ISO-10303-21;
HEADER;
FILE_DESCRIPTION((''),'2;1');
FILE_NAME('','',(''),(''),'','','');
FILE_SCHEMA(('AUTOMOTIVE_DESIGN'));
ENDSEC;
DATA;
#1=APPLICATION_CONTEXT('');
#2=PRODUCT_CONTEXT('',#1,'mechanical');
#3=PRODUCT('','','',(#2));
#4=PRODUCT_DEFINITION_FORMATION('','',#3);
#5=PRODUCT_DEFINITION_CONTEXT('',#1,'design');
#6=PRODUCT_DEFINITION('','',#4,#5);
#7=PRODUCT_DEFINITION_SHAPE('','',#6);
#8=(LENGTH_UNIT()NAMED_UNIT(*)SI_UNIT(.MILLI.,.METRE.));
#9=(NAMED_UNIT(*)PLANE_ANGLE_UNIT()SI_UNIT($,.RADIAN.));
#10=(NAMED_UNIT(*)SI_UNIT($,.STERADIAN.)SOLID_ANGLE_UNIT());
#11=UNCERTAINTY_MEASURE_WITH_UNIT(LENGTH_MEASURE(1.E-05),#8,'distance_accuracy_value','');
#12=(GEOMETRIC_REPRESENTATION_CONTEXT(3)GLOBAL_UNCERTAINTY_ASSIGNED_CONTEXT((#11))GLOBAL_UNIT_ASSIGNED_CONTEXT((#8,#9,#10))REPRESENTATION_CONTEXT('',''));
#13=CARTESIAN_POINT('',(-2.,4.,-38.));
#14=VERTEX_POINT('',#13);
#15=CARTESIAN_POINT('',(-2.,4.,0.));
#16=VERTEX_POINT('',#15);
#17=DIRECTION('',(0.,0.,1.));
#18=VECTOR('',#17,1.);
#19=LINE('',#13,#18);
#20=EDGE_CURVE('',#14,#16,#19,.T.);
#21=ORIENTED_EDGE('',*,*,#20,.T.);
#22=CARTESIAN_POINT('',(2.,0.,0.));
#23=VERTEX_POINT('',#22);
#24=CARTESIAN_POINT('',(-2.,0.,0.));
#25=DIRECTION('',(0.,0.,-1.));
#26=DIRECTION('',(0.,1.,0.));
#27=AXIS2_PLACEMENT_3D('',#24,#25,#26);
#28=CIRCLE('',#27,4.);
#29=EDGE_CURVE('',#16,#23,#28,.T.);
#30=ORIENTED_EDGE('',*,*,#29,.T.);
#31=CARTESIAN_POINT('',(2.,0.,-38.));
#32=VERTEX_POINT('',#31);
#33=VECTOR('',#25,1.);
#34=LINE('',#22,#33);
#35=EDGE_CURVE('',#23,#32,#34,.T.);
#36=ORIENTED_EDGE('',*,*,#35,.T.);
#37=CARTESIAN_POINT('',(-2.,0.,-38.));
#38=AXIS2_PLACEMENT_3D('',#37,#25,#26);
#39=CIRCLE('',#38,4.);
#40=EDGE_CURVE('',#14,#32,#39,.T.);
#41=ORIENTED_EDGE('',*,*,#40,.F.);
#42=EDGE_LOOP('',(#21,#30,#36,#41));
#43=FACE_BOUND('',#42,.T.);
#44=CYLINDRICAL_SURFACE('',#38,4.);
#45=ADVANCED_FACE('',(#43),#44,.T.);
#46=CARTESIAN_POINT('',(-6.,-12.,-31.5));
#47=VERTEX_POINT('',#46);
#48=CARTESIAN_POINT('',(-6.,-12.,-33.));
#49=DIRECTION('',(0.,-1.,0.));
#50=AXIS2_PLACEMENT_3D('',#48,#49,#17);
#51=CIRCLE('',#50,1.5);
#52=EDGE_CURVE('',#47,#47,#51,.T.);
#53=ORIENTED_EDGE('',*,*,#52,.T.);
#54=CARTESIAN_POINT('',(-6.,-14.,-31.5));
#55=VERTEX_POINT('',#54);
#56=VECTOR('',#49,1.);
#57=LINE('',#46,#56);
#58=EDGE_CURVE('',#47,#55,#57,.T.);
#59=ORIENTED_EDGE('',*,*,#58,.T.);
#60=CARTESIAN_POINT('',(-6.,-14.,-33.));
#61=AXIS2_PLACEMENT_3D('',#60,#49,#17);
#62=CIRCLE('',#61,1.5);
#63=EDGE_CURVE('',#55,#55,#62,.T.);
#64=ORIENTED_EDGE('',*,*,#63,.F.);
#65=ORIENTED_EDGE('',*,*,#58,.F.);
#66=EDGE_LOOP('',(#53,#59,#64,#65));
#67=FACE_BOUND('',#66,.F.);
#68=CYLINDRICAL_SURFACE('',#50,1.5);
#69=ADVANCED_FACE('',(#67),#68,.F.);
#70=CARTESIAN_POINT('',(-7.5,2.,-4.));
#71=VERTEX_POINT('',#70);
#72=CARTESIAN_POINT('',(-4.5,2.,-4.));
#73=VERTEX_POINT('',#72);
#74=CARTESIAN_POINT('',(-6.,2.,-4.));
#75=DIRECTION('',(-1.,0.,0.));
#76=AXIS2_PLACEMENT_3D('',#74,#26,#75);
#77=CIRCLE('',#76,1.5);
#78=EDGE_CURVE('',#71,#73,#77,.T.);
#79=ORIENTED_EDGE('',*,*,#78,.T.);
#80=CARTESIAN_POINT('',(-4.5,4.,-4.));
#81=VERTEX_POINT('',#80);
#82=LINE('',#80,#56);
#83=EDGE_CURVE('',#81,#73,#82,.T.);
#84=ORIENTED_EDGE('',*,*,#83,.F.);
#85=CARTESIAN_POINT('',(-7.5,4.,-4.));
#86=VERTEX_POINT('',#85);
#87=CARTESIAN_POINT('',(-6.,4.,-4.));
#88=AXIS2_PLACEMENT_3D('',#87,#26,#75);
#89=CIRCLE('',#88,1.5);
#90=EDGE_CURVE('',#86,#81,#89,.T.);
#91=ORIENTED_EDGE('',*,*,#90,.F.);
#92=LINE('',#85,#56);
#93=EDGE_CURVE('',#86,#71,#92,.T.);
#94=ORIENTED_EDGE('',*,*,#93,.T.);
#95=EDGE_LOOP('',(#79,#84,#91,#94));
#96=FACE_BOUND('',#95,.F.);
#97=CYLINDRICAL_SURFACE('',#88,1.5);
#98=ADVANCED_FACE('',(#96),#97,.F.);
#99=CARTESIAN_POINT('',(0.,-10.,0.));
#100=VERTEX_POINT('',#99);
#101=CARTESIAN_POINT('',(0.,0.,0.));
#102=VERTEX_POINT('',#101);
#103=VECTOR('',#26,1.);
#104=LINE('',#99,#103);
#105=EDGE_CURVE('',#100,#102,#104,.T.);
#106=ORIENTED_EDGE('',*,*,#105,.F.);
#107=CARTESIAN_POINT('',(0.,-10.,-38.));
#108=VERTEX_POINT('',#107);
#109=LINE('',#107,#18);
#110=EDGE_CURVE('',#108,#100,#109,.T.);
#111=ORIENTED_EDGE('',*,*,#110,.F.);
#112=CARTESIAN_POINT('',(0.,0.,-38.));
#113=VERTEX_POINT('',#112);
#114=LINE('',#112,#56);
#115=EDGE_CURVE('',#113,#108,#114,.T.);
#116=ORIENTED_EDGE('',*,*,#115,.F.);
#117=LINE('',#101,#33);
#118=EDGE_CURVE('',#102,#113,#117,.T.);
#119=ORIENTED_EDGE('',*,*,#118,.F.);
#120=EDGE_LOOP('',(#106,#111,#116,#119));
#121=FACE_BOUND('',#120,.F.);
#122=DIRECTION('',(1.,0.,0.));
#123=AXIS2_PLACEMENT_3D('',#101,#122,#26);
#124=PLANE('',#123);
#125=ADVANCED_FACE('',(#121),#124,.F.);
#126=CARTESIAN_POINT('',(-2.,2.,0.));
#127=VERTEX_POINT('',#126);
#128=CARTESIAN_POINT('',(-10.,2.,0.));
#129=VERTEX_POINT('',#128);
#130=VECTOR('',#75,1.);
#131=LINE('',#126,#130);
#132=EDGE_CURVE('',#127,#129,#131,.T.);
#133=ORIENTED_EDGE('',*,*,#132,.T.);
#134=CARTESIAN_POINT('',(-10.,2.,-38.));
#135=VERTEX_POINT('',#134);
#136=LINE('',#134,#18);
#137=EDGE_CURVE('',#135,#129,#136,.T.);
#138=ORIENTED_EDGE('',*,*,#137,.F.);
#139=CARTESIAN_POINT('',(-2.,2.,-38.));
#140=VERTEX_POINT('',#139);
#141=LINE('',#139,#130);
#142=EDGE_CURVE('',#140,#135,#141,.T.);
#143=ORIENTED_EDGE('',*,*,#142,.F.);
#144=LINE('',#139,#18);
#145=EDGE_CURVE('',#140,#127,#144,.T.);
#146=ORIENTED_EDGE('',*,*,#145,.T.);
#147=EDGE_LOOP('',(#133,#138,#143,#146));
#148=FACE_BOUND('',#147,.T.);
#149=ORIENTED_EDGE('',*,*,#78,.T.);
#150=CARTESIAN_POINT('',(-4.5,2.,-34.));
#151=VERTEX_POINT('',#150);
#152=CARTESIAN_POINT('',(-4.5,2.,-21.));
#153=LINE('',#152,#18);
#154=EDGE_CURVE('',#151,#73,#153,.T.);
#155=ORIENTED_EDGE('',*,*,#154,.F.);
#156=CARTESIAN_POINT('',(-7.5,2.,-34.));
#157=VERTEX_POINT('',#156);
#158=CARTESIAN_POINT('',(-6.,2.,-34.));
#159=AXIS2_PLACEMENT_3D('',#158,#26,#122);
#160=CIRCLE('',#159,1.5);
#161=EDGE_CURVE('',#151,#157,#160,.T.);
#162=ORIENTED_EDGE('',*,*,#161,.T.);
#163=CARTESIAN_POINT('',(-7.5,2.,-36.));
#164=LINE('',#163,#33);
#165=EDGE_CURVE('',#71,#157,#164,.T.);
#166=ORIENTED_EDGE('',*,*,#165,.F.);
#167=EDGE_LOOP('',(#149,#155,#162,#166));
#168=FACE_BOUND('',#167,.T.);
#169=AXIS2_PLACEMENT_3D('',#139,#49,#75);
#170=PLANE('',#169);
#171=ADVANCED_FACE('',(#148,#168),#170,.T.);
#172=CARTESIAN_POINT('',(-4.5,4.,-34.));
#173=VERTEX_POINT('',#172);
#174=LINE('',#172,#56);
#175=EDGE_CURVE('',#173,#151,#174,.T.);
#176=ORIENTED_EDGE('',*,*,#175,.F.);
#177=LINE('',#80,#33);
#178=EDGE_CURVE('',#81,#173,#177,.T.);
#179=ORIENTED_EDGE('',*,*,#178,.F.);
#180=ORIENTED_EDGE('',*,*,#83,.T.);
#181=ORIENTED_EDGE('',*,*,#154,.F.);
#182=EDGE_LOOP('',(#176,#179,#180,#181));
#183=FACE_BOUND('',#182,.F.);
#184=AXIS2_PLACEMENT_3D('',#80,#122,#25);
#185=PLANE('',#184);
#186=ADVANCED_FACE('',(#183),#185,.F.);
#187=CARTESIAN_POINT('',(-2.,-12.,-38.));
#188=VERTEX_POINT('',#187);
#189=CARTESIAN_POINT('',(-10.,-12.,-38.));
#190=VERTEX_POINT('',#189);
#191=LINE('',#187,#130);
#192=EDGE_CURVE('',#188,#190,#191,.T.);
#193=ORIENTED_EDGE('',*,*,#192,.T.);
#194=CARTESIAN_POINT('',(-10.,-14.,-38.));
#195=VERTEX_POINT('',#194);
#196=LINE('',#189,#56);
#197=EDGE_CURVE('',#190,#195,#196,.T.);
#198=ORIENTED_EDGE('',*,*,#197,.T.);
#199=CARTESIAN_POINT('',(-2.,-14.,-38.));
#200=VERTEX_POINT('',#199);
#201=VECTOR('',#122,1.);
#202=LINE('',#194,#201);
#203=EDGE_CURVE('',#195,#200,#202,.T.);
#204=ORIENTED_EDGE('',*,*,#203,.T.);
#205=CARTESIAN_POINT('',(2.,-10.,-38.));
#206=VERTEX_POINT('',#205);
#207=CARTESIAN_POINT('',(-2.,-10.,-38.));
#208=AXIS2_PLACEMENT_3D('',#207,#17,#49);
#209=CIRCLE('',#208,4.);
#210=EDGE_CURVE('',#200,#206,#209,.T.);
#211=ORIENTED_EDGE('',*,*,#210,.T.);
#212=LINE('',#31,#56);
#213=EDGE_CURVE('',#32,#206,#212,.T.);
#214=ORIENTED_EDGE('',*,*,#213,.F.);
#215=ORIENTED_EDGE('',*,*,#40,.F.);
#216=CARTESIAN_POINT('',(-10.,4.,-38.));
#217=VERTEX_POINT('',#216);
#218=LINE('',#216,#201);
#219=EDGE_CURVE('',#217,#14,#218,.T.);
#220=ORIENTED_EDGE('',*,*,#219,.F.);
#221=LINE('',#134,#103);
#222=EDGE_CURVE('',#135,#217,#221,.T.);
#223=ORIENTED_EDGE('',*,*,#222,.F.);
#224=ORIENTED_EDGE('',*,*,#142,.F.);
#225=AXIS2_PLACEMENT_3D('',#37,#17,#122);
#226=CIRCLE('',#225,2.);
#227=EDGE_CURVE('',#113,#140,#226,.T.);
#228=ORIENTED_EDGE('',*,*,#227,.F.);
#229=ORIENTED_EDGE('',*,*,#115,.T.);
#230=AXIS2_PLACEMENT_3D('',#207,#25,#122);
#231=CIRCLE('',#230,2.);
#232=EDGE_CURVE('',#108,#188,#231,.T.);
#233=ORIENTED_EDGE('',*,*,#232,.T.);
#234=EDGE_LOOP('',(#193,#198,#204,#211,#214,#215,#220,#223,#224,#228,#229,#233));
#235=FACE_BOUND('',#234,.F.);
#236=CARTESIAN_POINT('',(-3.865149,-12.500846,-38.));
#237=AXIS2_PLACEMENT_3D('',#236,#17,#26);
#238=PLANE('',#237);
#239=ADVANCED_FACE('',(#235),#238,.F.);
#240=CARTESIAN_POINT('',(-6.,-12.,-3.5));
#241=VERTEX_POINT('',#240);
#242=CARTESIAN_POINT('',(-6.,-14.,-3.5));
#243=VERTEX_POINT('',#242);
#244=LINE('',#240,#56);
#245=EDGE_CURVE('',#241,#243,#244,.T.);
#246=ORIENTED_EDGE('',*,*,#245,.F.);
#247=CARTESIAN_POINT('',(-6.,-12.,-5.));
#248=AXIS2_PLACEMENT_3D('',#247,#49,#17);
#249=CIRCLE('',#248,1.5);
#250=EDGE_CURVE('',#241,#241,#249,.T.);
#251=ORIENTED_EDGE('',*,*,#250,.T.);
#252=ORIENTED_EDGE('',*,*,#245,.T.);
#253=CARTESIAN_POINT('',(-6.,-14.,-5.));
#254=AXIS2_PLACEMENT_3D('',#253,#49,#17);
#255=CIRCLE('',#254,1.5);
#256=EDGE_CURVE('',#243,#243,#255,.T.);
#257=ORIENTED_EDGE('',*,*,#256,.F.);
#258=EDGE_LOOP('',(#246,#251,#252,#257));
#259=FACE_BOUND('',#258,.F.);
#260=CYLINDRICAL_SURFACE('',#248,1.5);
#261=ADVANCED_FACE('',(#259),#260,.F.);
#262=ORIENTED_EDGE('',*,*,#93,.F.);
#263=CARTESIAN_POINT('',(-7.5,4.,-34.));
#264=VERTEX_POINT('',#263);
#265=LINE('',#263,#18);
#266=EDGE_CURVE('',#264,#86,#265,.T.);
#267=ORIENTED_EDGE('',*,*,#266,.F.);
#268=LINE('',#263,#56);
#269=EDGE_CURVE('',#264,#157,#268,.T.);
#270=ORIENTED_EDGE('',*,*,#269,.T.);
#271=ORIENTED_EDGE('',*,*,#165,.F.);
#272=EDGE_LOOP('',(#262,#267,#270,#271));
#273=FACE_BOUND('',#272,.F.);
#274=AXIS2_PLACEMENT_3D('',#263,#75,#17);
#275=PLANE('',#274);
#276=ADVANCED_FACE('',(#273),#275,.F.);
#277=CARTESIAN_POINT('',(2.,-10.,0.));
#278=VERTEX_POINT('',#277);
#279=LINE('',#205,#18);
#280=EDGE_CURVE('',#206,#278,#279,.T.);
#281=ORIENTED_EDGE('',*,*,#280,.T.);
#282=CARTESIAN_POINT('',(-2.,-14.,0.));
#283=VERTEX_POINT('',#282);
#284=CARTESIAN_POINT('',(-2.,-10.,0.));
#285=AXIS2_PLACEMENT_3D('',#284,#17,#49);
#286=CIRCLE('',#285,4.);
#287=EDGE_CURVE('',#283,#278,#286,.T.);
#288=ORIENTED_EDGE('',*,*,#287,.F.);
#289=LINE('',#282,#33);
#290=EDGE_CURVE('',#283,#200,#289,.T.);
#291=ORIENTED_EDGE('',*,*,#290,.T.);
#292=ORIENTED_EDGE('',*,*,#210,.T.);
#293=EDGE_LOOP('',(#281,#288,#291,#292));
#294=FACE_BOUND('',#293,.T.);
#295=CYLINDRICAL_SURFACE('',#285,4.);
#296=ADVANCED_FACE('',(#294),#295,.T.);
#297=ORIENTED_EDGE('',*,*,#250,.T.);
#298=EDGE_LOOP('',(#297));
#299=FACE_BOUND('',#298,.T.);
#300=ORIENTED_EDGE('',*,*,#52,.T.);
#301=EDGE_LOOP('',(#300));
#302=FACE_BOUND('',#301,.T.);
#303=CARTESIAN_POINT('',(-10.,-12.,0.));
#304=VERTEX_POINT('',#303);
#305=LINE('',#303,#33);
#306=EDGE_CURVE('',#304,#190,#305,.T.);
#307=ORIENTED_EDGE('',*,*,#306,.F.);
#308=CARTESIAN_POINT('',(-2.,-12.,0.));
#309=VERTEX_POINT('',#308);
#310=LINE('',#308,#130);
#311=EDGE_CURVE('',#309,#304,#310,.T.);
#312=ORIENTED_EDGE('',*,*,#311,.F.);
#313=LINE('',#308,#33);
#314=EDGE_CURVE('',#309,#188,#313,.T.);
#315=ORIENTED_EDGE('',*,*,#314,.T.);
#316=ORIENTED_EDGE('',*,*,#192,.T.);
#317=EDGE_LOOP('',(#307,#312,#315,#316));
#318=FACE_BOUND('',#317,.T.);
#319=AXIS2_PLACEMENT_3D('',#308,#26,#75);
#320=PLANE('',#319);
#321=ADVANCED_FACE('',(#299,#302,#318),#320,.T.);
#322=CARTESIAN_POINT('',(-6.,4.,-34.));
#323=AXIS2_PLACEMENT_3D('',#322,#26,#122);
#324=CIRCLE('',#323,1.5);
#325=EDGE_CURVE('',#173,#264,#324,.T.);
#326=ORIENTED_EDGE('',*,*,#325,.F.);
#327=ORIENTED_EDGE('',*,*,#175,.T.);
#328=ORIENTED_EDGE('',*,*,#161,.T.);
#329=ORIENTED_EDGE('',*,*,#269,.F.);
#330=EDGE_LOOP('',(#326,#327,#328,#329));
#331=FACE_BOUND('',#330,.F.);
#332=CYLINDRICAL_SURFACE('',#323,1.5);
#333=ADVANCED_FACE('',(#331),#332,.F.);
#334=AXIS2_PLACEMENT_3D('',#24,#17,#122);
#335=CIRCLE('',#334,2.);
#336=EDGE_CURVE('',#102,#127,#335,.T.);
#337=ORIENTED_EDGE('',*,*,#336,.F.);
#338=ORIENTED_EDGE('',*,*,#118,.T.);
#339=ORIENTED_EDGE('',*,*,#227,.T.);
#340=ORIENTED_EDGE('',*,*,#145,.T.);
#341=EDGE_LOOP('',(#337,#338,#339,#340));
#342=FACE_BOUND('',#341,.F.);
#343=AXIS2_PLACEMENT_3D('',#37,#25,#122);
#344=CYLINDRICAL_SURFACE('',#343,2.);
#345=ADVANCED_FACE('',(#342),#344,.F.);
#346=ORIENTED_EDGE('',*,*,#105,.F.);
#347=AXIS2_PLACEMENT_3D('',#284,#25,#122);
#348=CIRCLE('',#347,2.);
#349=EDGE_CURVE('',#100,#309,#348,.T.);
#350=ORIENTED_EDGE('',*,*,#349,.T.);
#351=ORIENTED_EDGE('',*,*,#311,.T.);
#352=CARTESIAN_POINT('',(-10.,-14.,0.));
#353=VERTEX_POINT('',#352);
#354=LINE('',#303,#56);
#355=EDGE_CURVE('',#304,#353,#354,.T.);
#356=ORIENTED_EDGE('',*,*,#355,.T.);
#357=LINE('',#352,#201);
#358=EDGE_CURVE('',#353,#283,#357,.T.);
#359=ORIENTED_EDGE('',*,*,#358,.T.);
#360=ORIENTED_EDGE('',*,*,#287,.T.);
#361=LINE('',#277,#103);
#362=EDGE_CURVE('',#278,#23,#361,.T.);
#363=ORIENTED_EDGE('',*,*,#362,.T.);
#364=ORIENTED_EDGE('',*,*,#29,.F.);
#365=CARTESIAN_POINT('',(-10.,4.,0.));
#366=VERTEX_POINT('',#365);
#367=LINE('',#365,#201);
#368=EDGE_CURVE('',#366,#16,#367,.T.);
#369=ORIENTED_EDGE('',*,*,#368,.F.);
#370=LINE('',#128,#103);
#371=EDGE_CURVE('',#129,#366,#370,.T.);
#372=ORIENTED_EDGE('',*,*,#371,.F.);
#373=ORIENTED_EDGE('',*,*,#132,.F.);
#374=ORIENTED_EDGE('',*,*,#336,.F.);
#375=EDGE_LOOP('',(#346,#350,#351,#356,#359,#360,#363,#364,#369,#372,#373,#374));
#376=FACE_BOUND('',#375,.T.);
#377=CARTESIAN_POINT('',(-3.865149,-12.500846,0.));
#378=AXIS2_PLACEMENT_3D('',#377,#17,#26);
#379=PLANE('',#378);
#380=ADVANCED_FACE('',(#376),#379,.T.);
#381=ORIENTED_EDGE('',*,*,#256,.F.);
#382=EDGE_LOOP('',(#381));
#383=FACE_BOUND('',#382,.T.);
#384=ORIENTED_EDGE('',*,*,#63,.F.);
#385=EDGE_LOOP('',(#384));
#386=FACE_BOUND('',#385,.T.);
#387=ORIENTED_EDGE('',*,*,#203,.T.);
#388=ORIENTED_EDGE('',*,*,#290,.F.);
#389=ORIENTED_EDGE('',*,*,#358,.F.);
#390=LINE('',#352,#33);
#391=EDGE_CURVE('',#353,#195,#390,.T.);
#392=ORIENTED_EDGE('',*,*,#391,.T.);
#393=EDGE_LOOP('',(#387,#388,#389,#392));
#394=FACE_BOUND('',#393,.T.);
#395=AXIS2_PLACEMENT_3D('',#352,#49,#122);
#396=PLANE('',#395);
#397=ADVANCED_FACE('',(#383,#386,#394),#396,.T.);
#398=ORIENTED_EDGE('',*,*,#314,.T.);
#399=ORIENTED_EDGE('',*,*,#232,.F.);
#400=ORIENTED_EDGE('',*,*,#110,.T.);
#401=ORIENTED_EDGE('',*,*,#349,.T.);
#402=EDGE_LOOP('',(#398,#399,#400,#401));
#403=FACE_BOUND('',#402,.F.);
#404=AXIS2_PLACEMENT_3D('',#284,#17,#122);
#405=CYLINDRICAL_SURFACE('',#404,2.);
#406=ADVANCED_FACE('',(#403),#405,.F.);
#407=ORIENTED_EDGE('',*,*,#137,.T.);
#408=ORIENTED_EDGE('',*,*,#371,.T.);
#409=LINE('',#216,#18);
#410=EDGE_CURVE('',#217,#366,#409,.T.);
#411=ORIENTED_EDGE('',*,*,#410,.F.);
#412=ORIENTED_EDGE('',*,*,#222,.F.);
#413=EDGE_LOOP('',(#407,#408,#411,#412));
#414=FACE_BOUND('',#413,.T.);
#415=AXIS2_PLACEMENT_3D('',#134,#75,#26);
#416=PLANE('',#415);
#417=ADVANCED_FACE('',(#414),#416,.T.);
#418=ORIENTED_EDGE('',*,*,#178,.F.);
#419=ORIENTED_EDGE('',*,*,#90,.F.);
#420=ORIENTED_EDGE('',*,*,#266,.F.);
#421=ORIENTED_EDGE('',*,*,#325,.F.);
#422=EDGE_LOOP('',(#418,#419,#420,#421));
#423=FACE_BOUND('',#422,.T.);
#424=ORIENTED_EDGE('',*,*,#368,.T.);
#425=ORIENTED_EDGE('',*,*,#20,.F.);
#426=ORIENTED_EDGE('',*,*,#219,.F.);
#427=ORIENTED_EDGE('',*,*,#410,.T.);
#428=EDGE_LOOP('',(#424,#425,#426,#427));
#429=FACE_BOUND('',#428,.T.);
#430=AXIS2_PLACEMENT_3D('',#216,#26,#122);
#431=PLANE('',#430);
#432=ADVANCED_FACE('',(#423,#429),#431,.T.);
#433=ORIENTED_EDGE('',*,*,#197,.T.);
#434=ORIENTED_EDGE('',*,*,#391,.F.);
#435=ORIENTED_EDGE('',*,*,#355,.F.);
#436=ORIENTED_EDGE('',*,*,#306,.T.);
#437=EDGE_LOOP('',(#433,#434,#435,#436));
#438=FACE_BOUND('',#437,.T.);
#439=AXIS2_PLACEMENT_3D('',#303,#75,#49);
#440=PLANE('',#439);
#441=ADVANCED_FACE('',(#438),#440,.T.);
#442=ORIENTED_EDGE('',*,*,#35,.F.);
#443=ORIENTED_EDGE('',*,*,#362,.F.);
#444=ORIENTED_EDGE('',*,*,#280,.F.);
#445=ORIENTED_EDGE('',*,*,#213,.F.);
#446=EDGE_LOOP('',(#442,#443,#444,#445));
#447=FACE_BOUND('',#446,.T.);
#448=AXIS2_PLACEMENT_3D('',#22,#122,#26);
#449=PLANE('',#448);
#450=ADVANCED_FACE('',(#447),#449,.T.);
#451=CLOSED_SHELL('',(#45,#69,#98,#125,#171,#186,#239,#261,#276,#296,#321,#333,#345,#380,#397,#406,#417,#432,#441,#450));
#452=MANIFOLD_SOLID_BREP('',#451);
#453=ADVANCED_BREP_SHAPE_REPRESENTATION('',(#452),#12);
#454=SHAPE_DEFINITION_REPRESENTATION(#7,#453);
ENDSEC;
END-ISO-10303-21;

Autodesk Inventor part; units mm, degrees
ref_plane "YZ Plane" through (0, 0, 0) normal (1, 0, 0) x (0, 1, 0)
ref_plane "XZ Plane" through (0, 0, 0) normal (0, 1, 0) x (-1, 0, 0)
ref_plane "XY Plane" through (0, 0, 0) normal (0, 0, 1) x (1, 0, 0)
sketch "スケッチ1" plane through (0, 0, 0) normal (1, 0, 0) x (0, 1, 0)
  line L0 (0, 0) -> (0, -38)
  line L1 (0, -38) -> (-10, -38)
  line L2 (-10, -38) -> (-10, 0)
  line L3 (-10, 0) -> (0, 0)
  dimension "d0" = 38
  dimension "d2" = 10
extrude "プレート1" add sketch "スケッチ1" along normal blind 2
sketch "スケッチ14" plane through (-2, 2, -38) normal (0, 1, 0) x (-1, 0, 0)
  line L0 (0, 38) -> (0, 0)
  line L1 (0, 0) -> (8, 0)
  line L2 (8, 0) -> (8, 38)
  line L3 (8, 38) -> (0, 38)
edge flange "フランジ1" height 12 angle 90 thickness 2 bend radius 2 thickness toward (0, 1, 0) relief tear relief width 2 relief depth 1 edges at (0, 0, -19) wall of the first edge with corners at (-2, 2, 0) (-2, 2, -38) (-10, 2, -38) (-10, 2, 0)
bend "曲げ26"
corner "コーナー1"
sketch "スケッチ15" plane through (-2, -12, 0) normal (0, -1, 0) x (1, 0, 0)
  line L0 (0, -38) -> (0, 0)
  line L1 (0, 0) -> (-8, 0)
  line L2 (-8, 0) -> (-8, -38)
  line L3 (-8, -38) -> (0, -38)
edge flange "フランジ2" height 12 angle 90 thickness 2 bend radius 2 thickness toward (0, -1, 0) relief tear relief width 2 relief depth 1 edges at (0, -10, -19) wall of the first edge with corners at (-2, -12, -38) (-2, -12, 0) (-10, -12, 0) (-10, -12, -38)
bend "曲げ27"
corner "コーナー2"
sketch "スケッチ16" plane through (-10, 4, 0) normal (0, 1, 0) x (1, 0, 0)
  line L0 (5.5, 4) -> (5.5, 34)
  arc A0 (5.5, 34) -> (2.5, 34) centre (4, 34) ccw
  line L1 (2.5, 34) -> (2.5, 4)
  arc A1 (2.5, 4) -> (5.5, 4) centre (4, 4) ccw
  line L2 (0, 38) -> (8, 38) projected
  line L3 (8, 0) -> (0, 0) projected
  point P0 (10, 0)
  point P1 (4, 38)
  dimension "d192" = 1.5
  dimension "d193" = 4
  dimension "d194" = 4
extrude "押し出し1" cut sketch "スケッチ16" against normal blind 10
sketch "スケッチ17" plane through (-10, -12, 0) normal (0, 1, 0) x (1, 0, 0)
  line L0 (0, 0) -> (8, 0) projected
  line L1 (0, 38) -> (8, 38) projected
  point P0 (10, 0)
  point P1 (4, 5)
  point P2 (4, 33)
  point P3 (4, 0)
  point P4 (4, 38)
  dimension "d197" = 5
  dimension "d198" = 5
hole "穴1" at (-6, -12, -5) at (-6, -12, -33) direction (0, -1, 0) diameter 3 end through all
equation "\"d204\" = Thickness"
equation "\"d3\" = Thickness"
equation "\"d172\" = BendReliefWidth"
equation "\"d173\" = BendReliefDepth"
equation "\"d174\" = MinimumRemnant"
equation "\"d175\" = TransitionRadius"
equation "\"d178\" = BendRadius"
equation "\"d179\" = CornerReliefSize"
equation "\"d180\" = GapSize"
equation "\"d181\" = JacobiRadiusSize"
equation "\"d182\" = BendReliefWidth"
equation "\"d183\" = BendReliefDepth"
equation "\"d184\" = MinimumRemnant"
equation "\"d185\" = TransitionRadius"
equation "\"d188\" = BendRadius"
equation "\"d189\" = CornerReliefSize"
equation "\"d190\" = GapSize"
equation "\"d191\" = JacobiRadiusSize"
equation "\"BendRadius\" = Thickness"
equation "\"BendReliefWidth\" = Thickness"
equation "\"BendReliefDepth\" = 0.5 * Thickness"
equation "\"CornerReliefSize\" = 4 * Thickness"
equation "\"MinimumRemnant\" = 2 * Thickness"
equation "\"TransitionRadius\" = BendRadius"
equation "\"JacobiRadiusSize\" = BendRadius"
equation "\"GapSize\" = Thickness"
equation "\"Thickness\" = 2"
properties part number "frame_front" material "アルミニウム 6061"
